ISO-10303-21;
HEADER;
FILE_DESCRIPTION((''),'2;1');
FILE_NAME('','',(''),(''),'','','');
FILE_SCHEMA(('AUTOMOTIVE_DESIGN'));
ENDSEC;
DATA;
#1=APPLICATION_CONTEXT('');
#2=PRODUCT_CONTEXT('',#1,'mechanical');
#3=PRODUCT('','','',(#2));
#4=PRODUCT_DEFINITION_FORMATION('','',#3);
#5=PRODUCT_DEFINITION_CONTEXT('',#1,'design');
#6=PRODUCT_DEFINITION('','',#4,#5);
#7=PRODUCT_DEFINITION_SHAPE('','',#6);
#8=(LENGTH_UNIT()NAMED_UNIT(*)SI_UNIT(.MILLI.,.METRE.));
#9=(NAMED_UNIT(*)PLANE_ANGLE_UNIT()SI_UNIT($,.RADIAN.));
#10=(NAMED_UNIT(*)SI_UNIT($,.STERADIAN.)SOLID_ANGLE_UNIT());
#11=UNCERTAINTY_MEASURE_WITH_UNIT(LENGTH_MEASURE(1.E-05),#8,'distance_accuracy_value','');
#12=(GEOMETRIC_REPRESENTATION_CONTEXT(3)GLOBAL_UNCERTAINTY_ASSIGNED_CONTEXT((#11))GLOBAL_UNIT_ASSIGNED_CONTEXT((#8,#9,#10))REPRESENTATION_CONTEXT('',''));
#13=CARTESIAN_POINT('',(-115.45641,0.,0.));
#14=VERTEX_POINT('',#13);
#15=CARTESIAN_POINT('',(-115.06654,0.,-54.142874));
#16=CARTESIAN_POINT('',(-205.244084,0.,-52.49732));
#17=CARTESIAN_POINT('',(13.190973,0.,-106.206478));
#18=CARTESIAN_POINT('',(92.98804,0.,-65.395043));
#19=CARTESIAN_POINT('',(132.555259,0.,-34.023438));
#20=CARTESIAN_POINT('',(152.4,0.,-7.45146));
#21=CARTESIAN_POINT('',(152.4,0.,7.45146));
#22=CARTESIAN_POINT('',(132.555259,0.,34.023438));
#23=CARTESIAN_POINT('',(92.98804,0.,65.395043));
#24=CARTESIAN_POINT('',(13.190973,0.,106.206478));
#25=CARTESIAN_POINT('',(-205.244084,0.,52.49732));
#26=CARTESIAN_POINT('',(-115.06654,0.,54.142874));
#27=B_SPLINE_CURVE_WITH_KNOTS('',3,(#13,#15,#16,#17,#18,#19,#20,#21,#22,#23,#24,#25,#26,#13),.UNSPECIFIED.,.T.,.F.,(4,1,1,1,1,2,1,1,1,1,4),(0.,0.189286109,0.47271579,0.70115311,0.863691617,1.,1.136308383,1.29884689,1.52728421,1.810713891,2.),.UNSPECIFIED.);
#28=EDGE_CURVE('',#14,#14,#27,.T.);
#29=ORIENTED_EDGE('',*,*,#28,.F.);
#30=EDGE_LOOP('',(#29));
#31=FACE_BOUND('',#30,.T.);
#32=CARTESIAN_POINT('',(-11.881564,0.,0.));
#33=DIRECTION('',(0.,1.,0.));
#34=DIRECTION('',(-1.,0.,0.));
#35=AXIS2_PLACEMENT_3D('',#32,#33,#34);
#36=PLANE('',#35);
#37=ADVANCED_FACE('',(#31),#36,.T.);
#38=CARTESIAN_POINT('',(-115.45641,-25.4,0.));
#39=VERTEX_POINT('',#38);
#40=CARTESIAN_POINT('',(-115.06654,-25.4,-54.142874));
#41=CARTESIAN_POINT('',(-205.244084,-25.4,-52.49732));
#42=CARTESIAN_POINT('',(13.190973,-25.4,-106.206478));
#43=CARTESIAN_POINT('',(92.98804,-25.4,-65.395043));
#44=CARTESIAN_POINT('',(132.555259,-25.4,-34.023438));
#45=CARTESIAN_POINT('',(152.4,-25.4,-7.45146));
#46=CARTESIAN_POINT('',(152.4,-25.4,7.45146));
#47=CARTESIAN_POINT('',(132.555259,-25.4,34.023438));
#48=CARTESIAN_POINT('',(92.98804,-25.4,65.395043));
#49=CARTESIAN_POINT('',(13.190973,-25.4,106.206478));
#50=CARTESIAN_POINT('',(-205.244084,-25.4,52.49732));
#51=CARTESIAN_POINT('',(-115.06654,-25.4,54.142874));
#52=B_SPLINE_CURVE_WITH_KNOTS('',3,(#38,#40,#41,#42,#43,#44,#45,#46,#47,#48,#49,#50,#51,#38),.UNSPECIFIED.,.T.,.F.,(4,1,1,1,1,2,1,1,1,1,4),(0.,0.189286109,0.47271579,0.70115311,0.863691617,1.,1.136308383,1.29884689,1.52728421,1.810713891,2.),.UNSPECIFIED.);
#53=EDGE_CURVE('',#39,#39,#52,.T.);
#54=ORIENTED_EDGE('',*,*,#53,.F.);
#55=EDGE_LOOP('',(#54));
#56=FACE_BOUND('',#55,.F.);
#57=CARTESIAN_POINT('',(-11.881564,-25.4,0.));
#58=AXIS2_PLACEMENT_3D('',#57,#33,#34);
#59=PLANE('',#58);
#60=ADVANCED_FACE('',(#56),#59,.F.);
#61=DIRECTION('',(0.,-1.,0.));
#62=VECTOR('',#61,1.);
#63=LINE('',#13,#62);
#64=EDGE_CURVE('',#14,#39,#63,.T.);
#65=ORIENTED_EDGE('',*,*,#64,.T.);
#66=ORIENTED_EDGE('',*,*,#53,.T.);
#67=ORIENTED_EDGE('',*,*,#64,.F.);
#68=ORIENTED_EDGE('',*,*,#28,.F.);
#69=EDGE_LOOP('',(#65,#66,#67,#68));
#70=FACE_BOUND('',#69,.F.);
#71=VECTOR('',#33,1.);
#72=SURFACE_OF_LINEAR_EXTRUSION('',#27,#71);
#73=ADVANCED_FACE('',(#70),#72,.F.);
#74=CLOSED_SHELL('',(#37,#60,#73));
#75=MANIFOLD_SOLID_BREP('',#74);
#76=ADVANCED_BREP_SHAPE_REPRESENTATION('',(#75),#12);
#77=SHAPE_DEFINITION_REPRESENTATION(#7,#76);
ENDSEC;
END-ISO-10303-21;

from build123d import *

# Parameters (mm, degrees)
F1_DEPTH = 25.4


# Not quite as in the source:
# - a feature names something its author has since deleted; it is built from what else it names


with BuildPart() as f1:
    # F0 (on Front) → F1 (new body)
    with BuildSketch(Plane.XZ):
        with BuildLine():
            add(Edge.make_bspline(
                [(-115.4564102077, 0), (-115.0665396482, 54.1428744661), (-205.2440837339, 52.4973201914), (13.1909733543, 106.206477706), (92.9880395211, 65.3950430383), (132.5552585521, 34.0234377916), (152.4, 7.4514596081), (152.4, 0)],
                knots=[0, 0, 0, 0, 0.1892861088, 0.4727157898, 0.7011531101, 0.8636916169, 1, 1, 1, 1], degree=3))
            add(Edge.make_bspline(
                [(-115.4564102077, 0), (-115.0665396482, -54.1428744661), (-205.2440837339, -52.4973201914), (13.1909733543, -106.206477706), (92.9880395211, -65.3950430383), (132.5552585521, -34.0234377916), (152.4, -7.4514596081), (152.4, 0)],
                knots=[0, 0, 0, 0, 0.1892861088, 0.4727157898, 0.7011531101, 0.8636916169, 1, 1, 1, 1], degree=3))
        make_face()
    extrude(amount=F1_DEPTH)


solid = f1.part
